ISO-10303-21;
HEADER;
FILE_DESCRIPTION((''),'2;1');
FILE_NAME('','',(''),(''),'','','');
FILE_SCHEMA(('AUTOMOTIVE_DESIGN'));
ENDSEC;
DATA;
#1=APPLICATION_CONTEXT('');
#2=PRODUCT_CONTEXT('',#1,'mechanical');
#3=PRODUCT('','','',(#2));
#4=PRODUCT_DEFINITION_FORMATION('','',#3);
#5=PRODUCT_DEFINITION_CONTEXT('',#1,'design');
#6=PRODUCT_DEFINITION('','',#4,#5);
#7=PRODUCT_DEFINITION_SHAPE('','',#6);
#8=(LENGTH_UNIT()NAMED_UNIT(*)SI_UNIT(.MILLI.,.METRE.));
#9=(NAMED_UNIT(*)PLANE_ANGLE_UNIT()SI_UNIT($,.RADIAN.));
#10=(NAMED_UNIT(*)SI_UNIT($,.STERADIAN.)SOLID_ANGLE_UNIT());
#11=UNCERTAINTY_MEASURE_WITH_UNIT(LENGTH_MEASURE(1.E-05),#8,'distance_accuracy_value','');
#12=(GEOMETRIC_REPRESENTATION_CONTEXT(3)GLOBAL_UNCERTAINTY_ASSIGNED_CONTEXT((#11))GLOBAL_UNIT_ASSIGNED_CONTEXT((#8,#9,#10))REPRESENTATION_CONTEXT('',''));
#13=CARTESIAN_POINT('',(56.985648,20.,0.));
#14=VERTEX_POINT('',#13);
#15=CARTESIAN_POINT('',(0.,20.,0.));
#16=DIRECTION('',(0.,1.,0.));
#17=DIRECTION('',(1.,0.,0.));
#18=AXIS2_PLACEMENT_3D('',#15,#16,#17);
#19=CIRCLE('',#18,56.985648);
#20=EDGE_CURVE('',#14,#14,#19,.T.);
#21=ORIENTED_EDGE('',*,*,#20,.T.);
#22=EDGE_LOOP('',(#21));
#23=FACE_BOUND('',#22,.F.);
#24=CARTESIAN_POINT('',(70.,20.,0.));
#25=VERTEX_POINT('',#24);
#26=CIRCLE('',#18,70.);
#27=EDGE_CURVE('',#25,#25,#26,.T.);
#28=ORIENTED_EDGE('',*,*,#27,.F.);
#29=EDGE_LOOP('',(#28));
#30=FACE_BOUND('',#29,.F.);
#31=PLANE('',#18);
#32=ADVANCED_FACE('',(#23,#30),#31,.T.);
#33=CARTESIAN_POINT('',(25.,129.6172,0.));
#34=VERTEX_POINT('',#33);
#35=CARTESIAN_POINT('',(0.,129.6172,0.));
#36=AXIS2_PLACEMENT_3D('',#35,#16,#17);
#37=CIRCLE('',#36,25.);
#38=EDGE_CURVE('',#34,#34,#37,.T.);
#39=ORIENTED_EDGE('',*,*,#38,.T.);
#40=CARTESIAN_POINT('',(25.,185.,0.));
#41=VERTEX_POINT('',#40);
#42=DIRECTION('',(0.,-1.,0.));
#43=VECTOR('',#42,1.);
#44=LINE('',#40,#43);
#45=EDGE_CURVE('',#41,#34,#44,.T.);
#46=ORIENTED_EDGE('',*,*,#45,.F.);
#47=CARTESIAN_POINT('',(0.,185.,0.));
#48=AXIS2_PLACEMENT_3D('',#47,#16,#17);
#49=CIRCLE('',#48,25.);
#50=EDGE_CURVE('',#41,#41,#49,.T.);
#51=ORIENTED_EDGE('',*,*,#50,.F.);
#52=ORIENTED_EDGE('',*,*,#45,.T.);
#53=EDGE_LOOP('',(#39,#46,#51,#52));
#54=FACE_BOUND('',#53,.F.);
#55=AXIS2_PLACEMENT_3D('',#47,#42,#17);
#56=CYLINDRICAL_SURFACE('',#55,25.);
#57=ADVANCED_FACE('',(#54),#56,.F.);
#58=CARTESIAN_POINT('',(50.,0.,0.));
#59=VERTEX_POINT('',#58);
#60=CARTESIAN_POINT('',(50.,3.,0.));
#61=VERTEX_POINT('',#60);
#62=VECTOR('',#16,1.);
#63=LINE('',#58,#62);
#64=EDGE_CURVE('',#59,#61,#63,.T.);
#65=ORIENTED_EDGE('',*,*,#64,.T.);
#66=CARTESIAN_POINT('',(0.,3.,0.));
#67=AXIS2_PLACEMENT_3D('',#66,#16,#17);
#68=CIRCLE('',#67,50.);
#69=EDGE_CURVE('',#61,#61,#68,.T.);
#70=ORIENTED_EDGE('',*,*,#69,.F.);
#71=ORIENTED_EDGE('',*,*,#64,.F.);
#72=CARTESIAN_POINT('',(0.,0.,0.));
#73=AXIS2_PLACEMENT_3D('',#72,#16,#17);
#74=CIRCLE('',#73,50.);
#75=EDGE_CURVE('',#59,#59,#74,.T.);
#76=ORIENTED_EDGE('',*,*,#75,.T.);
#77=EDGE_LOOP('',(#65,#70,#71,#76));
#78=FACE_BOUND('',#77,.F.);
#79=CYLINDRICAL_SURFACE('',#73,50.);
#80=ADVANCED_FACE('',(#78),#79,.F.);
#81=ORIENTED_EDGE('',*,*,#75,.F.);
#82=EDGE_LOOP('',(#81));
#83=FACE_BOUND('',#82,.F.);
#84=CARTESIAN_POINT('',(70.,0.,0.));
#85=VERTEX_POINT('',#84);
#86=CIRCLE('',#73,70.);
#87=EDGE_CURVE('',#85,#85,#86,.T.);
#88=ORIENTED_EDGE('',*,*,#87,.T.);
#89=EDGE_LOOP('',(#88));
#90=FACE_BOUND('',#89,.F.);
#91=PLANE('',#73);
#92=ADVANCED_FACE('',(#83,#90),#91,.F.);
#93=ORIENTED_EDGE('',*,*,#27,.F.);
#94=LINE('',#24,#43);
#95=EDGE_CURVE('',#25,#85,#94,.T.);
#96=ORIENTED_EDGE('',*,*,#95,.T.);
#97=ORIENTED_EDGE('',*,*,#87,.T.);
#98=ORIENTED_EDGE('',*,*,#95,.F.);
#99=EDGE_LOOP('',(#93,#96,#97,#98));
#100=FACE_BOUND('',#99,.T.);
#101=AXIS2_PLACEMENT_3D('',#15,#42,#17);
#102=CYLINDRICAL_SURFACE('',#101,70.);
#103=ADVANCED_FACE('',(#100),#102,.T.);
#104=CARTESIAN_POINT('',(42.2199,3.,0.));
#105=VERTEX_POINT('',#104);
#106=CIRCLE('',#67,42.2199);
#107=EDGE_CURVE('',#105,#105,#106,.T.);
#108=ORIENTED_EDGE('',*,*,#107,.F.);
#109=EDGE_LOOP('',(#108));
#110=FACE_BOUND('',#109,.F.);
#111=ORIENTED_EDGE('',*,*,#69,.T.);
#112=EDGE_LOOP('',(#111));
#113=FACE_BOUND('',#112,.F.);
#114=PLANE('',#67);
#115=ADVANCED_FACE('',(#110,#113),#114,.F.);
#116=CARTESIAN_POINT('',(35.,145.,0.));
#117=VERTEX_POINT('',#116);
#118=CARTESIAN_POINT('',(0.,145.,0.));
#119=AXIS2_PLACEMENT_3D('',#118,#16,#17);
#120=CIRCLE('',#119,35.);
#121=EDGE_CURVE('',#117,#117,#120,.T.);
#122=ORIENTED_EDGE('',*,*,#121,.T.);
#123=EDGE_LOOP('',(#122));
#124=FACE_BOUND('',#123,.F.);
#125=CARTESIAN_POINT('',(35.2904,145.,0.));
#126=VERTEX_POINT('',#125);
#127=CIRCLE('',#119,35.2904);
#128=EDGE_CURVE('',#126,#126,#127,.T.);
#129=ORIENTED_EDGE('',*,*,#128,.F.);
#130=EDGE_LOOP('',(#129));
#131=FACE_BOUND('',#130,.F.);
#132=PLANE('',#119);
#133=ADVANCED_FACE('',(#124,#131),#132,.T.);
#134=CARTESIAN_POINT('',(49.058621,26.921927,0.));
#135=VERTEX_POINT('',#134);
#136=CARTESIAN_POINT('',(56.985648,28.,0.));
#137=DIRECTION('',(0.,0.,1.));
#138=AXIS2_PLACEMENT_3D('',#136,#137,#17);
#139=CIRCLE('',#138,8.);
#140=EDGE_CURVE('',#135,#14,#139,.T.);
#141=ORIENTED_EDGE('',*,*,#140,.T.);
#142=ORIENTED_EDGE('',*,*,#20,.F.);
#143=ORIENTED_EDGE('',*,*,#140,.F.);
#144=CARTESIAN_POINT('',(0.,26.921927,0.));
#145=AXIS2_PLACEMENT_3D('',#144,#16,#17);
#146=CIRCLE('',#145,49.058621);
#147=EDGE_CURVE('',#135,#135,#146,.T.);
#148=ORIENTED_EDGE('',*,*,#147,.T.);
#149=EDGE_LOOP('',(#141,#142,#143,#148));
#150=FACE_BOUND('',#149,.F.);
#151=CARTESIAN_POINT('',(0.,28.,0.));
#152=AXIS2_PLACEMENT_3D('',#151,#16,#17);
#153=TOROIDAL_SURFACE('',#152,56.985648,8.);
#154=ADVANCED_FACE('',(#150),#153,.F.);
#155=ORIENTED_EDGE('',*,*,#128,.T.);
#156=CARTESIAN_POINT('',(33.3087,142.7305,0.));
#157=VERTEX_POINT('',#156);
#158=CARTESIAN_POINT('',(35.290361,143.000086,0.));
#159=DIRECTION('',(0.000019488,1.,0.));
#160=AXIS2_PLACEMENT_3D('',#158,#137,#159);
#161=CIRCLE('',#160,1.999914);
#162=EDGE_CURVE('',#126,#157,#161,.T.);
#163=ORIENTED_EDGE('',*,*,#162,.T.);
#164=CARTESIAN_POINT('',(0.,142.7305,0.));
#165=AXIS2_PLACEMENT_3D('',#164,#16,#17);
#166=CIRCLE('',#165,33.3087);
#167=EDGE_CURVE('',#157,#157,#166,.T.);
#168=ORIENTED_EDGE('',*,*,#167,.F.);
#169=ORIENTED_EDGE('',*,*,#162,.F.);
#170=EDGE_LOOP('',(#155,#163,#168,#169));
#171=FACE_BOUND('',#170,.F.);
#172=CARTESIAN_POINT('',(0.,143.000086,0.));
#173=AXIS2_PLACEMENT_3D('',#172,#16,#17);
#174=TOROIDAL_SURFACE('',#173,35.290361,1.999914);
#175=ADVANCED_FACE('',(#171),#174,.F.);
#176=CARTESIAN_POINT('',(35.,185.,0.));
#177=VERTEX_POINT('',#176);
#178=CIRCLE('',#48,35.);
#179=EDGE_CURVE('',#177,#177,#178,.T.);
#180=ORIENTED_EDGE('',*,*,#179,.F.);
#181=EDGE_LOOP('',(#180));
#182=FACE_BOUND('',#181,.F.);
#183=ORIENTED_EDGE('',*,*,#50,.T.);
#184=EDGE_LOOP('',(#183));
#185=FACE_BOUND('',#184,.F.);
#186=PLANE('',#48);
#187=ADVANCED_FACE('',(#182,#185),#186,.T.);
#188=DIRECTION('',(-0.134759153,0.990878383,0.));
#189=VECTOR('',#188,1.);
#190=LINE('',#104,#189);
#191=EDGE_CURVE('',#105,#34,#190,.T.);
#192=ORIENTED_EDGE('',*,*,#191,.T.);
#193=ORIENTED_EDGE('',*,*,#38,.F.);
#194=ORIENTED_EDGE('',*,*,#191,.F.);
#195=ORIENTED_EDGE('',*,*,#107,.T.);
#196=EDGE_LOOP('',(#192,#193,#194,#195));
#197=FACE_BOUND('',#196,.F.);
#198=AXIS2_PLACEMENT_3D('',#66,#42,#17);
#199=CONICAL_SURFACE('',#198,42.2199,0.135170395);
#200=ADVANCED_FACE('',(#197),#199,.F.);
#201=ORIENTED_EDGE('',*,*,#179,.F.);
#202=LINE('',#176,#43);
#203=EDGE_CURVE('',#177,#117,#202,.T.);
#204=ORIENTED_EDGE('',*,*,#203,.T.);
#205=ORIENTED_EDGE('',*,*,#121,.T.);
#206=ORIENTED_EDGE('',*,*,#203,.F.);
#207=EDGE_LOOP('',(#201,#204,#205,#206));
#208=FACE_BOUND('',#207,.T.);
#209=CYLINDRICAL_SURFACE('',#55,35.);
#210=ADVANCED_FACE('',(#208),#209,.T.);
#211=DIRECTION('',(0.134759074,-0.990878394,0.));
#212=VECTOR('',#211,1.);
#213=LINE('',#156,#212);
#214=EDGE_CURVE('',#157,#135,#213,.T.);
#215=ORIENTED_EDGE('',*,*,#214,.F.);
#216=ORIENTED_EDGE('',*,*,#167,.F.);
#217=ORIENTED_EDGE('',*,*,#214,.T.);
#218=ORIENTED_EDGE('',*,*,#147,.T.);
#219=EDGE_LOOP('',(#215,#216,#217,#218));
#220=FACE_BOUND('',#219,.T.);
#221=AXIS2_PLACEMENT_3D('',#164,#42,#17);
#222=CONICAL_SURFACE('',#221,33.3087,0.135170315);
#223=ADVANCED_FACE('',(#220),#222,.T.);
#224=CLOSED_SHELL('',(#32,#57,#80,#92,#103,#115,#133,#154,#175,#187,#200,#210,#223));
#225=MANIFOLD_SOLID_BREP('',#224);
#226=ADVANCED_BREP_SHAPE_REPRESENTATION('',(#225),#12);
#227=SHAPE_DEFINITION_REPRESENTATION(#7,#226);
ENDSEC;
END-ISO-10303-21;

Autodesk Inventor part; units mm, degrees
ref_plane "YZ Plane" through (0, 0, 0) normal (1, 0, 0) x (0, 1, 0)
ref_plane "XZ Plane" through (0, 0, 0) normal (0, 1, 0) x (-1, 0, 0)
ref_plane "XY Plane" through (0, 0, 0) normal (0, 0, 1) x (1, 0, 0)
sketch "FV.sec" plane through (0, 0, 0) normal (0, 0, 1) x (1, 0, 0)
  line L0 (25, 185) -> (35, 185)
  line L1 (35, 185) -> (35, 145)
  line L2 (25, 185) -> (25, 129.6172)
  line L3 (50, 20) -> (70, 20)
  line L4 (70, 20) -> (70, 0)
  line L5 (0, 0) -> (0, 185)
  line L6 (35, 145) -> (35.2904, 145)
  line L7 (33.3087, 142.7305) -> (50, 20)
  line L8 (70, 0) -> (50, 0)
  line L9 (50, 0) -> (50, 3)
  line L10 (50, 3) -> (42.2199, 3)
  line L11 (42.2199, 3) -> (25, 129.6172)
  arc A0 (35.2904, 145) -> (33.3087, 142.7305) centre (35.2904, 143) ccw
  point P0 (33, 145)
  dimension "d9" = 40
  dimension "d11" = 185
  dimension "d12" = 20
  dimension "d16" = 3
  dimension "d17" = 10
  dimension "d18" = 66
  dimension "d21" = 100
  dimension "d22" = 10
  dimension "d23" = 100
  dimension "d24" = 20
  dimension "d28" = 2
revolve "Revolution1" add sketch "FV.sec" angle 360 about axis through (0, 0, 0) along (0, 1, 0)
fillet "Fillet1" radius 8 1 edges at (-50, 20, 0)
properties material "Iron, Cast"
